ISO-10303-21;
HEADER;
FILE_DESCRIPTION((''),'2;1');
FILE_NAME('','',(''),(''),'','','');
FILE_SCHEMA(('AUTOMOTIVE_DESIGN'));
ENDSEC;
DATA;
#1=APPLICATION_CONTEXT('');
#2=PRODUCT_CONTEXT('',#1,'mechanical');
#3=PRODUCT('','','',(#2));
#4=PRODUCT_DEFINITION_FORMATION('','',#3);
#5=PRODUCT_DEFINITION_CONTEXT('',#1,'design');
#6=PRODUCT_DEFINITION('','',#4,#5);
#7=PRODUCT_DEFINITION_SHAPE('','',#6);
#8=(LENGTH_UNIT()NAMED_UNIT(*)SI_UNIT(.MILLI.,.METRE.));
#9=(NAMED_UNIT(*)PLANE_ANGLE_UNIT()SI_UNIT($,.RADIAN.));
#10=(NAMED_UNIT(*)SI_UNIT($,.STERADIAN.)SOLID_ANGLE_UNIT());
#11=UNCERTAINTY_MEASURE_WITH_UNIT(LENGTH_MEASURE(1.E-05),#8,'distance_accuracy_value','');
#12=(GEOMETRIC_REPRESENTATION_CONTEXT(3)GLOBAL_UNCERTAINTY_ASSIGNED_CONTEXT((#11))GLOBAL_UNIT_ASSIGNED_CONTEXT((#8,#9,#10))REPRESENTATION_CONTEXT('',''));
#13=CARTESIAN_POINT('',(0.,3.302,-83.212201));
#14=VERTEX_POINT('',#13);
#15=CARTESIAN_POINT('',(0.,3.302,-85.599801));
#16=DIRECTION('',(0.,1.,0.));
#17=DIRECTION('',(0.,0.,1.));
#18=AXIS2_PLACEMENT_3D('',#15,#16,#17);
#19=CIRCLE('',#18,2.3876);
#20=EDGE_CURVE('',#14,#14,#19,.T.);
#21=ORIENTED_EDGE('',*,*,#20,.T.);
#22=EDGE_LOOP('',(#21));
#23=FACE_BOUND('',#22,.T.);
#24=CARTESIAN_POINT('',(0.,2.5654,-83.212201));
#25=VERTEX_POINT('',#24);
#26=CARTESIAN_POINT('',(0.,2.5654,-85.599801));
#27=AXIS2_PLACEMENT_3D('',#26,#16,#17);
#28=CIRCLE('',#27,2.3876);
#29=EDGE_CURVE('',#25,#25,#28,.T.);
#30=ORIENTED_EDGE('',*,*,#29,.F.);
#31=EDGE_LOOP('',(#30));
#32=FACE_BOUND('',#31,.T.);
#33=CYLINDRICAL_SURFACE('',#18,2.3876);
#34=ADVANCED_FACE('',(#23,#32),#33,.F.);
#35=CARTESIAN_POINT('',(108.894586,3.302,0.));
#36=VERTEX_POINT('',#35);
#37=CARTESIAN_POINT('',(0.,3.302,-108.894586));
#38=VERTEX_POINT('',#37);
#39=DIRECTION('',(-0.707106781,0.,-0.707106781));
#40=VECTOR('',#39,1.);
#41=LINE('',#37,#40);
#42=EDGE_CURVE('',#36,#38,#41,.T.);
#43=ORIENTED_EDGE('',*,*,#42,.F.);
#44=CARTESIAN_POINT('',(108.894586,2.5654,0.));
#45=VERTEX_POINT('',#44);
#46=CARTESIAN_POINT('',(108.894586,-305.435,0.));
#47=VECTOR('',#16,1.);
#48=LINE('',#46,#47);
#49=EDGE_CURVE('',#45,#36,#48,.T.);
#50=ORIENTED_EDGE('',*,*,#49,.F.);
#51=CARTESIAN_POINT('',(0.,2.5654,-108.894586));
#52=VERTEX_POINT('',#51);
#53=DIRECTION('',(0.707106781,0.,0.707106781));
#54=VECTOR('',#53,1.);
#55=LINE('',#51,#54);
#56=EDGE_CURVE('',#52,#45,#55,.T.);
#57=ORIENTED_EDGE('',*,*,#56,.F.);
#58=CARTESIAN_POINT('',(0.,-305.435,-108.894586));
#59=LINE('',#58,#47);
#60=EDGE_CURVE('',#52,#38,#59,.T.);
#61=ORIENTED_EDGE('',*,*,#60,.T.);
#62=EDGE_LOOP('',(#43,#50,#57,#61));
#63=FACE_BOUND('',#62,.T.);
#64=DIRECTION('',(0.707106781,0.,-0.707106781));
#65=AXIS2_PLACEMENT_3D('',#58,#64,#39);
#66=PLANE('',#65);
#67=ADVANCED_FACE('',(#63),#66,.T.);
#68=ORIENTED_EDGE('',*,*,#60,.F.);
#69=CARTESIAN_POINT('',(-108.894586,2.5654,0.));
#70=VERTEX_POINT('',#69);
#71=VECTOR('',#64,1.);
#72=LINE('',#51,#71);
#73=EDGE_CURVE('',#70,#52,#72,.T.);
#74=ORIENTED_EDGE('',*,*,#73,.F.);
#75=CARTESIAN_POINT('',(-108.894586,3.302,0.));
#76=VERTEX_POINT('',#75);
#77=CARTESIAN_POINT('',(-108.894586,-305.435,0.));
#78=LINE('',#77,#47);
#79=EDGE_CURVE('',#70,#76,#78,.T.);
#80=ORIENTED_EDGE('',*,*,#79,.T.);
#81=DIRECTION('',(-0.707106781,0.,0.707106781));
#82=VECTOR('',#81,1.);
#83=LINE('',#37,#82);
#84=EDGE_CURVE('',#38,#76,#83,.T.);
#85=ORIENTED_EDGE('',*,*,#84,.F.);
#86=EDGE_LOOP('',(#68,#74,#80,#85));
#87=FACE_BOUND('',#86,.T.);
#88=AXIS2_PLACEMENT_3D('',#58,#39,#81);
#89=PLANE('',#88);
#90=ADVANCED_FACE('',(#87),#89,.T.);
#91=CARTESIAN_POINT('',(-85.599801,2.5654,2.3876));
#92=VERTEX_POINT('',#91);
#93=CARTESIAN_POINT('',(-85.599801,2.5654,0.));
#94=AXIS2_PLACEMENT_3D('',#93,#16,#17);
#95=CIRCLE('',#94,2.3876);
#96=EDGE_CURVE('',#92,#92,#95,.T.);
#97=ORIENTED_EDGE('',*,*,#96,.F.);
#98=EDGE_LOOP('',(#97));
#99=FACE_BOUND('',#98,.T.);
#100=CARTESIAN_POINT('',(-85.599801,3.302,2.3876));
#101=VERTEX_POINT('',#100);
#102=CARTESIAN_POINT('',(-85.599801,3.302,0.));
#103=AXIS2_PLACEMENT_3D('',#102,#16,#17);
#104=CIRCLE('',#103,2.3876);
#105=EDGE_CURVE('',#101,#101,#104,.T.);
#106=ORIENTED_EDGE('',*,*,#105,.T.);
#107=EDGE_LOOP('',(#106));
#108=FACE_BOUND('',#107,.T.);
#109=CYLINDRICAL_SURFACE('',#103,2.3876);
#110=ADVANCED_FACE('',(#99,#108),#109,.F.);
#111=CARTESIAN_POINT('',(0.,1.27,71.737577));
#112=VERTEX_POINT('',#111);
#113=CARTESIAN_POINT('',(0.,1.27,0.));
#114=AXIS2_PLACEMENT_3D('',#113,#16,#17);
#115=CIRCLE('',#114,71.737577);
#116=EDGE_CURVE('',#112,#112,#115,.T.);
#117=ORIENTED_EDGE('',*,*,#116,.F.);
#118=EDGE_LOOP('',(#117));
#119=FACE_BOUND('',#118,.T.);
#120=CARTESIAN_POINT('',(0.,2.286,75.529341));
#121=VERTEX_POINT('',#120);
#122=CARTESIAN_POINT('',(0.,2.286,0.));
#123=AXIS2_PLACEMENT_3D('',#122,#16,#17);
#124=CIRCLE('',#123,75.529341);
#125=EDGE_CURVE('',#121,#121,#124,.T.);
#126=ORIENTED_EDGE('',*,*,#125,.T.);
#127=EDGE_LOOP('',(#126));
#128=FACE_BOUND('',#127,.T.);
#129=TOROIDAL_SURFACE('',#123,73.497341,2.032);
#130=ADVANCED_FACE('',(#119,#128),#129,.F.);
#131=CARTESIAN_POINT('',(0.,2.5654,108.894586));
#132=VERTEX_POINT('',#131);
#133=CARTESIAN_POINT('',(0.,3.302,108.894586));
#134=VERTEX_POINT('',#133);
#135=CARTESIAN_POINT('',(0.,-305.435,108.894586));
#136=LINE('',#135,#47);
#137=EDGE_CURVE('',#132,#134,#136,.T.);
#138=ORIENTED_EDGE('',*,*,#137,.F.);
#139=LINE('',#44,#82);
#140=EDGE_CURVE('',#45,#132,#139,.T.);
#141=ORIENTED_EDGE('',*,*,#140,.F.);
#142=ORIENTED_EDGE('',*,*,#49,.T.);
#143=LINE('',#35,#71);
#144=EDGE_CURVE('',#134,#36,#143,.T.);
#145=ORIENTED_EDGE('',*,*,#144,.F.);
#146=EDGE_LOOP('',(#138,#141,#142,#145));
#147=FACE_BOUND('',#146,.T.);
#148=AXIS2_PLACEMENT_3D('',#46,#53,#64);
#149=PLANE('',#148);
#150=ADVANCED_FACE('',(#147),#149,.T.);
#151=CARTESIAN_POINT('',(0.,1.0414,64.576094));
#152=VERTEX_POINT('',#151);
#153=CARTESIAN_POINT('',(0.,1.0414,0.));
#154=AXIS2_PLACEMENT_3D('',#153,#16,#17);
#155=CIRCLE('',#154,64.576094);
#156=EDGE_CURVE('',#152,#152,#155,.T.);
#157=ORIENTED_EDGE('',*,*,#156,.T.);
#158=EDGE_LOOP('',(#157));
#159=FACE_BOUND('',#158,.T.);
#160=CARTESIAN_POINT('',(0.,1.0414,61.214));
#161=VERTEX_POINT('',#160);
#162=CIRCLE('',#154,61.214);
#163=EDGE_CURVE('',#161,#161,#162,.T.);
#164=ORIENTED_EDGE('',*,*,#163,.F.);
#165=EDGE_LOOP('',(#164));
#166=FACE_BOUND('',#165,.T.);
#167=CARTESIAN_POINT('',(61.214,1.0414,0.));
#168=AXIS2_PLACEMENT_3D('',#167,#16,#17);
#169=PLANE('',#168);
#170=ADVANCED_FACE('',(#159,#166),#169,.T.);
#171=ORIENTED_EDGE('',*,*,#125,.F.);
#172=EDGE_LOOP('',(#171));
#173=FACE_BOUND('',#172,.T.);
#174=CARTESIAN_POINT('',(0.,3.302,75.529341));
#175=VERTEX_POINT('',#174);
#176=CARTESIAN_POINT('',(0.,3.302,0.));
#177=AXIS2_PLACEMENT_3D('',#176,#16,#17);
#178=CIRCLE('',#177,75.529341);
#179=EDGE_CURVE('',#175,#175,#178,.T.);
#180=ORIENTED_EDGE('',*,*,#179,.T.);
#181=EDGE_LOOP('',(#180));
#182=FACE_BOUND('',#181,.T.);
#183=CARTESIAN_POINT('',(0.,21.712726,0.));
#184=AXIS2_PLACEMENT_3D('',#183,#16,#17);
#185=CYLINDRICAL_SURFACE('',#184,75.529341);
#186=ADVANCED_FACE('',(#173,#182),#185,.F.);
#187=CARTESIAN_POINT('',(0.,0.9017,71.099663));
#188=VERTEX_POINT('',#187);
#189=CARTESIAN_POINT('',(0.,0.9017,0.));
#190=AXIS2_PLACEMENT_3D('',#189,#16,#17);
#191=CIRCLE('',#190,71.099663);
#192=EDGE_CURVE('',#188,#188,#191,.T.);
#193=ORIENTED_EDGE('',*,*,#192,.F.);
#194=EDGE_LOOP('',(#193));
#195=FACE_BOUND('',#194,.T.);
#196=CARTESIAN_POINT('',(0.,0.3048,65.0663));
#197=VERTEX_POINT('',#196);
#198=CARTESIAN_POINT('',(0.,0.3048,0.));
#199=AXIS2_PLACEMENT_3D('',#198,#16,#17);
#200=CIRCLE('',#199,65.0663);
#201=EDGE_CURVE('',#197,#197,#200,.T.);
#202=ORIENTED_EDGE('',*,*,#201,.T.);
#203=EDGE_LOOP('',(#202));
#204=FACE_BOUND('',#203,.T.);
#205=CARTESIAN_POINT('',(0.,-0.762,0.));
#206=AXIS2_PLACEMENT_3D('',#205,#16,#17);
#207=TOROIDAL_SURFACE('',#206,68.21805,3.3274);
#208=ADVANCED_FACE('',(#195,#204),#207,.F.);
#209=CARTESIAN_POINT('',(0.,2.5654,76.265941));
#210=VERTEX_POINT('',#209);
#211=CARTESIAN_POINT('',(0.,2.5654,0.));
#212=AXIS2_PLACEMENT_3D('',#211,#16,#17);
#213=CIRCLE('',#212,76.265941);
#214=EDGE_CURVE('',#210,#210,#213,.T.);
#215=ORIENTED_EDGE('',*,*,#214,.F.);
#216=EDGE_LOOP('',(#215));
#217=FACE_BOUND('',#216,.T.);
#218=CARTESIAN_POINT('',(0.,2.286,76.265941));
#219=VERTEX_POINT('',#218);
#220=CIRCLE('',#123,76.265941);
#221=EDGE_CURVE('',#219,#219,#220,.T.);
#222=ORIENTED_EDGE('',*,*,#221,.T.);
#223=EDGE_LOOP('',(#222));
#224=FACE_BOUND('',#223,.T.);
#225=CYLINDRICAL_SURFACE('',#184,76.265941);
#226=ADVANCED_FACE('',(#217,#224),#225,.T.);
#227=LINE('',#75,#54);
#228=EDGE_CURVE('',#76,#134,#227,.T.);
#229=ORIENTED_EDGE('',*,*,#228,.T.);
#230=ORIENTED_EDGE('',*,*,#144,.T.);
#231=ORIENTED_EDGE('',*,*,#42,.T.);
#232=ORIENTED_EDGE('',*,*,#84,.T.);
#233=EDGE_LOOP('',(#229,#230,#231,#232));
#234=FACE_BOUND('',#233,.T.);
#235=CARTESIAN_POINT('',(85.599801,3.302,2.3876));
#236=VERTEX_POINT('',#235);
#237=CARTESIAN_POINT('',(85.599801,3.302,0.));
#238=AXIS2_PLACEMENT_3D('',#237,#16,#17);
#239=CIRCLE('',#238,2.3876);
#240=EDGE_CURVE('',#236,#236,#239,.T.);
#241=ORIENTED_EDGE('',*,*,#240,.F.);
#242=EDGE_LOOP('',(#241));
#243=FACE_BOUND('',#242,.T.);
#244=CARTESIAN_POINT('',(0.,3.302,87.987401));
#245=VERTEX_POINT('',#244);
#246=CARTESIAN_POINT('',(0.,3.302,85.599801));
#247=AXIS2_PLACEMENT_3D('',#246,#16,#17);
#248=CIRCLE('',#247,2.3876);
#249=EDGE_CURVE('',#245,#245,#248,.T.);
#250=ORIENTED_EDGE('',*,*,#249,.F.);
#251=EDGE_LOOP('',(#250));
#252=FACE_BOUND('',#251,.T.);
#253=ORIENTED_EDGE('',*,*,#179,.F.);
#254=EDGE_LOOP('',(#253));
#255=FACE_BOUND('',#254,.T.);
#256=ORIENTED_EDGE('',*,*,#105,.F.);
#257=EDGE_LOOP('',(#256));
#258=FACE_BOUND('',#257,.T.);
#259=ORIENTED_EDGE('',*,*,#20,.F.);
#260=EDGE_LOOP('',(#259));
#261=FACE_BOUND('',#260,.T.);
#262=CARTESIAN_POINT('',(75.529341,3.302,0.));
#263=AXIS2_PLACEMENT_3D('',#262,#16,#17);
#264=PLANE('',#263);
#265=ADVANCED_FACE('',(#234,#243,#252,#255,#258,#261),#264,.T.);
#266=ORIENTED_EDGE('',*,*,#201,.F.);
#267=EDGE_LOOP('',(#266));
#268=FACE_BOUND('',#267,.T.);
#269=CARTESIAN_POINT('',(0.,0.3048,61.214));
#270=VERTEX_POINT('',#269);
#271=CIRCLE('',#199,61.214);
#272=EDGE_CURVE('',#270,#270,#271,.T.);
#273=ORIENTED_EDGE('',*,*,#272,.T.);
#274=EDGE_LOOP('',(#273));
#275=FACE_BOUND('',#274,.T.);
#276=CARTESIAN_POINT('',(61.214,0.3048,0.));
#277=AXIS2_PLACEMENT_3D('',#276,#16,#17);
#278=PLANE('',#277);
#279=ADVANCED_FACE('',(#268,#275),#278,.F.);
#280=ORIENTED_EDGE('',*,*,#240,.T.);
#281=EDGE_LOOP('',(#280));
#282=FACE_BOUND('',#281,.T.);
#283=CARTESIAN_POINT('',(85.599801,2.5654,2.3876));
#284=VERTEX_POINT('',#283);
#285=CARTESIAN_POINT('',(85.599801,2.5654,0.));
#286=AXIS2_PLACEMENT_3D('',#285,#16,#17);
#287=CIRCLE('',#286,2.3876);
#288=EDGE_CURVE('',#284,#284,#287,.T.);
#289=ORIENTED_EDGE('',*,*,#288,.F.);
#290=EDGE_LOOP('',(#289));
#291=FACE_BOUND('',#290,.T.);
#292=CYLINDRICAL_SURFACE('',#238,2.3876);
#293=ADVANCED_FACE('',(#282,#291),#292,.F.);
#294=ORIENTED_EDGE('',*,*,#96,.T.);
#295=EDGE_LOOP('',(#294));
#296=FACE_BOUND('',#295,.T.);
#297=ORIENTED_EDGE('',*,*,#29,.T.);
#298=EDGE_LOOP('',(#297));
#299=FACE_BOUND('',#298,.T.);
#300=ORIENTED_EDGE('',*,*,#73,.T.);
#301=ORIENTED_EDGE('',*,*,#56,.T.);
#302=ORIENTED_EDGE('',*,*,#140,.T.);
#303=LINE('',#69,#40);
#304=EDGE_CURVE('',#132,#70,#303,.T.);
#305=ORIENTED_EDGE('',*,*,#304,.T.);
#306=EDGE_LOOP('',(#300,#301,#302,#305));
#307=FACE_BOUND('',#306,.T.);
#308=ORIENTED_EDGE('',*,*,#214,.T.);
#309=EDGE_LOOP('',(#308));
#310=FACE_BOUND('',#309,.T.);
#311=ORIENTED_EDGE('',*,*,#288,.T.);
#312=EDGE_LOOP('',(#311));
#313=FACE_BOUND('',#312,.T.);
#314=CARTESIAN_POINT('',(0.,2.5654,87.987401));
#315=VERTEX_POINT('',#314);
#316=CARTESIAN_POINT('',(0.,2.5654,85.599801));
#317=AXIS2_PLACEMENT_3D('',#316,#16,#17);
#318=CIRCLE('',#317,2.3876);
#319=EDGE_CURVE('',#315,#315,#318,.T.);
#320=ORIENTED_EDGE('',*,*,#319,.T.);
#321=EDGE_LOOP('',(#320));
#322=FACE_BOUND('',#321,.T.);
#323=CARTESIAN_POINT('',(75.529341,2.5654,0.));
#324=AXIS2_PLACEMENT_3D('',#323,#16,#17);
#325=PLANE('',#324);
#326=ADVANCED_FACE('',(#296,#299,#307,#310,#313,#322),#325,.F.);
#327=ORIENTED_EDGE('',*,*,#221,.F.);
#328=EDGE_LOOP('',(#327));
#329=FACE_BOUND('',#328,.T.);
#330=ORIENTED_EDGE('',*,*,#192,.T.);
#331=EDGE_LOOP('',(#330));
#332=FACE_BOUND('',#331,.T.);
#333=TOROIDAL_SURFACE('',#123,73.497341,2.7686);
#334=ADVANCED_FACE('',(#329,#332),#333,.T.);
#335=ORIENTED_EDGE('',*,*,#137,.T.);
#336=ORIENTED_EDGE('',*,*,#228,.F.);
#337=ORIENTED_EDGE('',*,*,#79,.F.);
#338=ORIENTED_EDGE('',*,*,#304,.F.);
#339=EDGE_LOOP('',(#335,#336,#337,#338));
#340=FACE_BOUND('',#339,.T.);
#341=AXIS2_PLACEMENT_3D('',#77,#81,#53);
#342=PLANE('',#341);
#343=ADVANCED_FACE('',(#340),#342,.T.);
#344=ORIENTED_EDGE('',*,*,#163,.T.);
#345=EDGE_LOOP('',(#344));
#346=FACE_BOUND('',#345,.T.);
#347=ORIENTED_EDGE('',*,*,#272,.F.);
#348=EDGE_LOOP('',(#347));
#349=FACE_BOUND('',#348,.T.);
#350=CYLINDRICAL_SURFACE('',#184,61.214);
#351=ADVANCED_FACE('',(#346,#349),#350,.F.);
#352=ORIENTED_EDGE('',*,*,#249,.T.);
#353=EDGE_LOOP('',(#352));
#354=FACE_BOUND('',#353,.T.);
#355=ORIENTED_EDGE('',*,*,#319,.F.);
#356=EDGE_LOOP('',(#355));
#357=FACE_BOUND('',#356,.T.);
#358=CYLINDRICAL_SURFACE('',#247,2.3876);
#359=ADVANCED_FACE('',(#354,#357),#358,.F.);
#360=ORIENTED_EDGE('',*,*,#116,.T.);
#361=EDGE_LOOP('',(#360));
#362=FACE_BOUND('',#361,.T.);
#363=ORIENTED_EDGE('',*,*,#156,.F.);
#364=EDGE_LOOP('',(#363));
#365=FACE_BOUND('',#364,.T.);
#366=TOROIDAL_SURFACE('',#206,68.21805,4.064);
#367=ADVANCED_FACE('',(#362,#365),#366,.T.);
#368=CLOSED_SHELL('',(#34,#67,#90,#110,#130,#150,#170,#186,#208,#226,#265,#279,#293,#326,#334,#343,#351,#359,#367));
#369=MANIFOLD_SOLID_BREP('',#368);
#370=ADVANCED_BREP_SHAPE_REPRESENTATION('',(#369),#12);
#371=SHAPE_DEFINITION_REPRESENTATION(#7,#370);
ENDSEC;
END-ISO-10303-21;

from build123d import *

# Parameters (mm, degrees)
SKETCH2_W                                 = 154.0002
SKETCH2_H                                 = 154.0002
SKETCH2_R                                 = 75.529340861
EXTRUDE1_DEPTH                            = 0.7366
EXTRUDE2_START                            = -0.7366
SKETCH3_R                                 = 75.529340861
EXTRUDE2_DEPTH                            = 0.7366
CIRPATTERN1_COUNT                         = 6
SKETCH5_W                                 = 3.3782
SKETCH5_H                                 = 0.7366
F_5_32_0_156250_DIAMETER_HOLE1_AT_2_COUNT = 2
F_5_32_0_156250_DIAMETER_HOLE1_AT_2_PITCH = 141.3002
F_5_32_0_156250_DIAMETER_HOLE1_AT_3_COUNT = 2
F_5_32_0_156250_DIAMETER_HOLE1_AT_3_PITCH = 141.3002
F_5_32_0_156250_DIAMETER_HOLE1_AT_4_COUNT = 2
F_5_32_0_156250_DIAMETER_HOLE1_AT_4_PITCH = 199.828659206
SKETCH7_W                                 = 2.3876
SKETCH7_H                                 = 8.128
F_5_32_0_156250_DIAMETER_HOLE2_AT_2_COUNT = 2
F_5_32_0_156250_DIAMETER_HOLE2_AT_2_PITCH = 121.0564
F_5_32_0_156250_DIAMETER_HOLE2_AT_3_COUNT = 2
F_5_32_0_156250_DIAMETER_HOLE2_AT_3_PITCH = 171.199602692
F_5_32_0_156250_DIAMETER_HOLE2_AT_4_COUNT = 2
F_5_32_0_156250_DIAMETER_HOLE2_AT_4_PITCH = 121.0564
CIRPATTERN2_COUNT                         = 4


# Read off the part's stored shape, not the designer's step: Revolve-Thin5
with BuildPart() as part:
    # Sketch1 → Revolve-Thin4 (revolve)
    with BuildSketch(Plane.XY, mode=Mode.PRIVATE) as revolve_thin4_sk:
        with BuildLine():
            Line((62.74854946, 1.778), (61.214, 1.778))
            ThreePointArc((61.214, 1.778), (59.436, 0), (61.214, -1.778))
            Line((61.214, -1.778), (64.28309892, -1.778))
            ThreePointArc((64.28309892, -1.778), (67.669225582, -4.788771381), (71.737577241, -2.794))
            ThreePointArc((71.737577241, -2.794), (74.023261161, -1.847238721), (75.529340861, -3.81))
            Line((75.529340861, -3.81), (75.529340861, -4.826))
            Line((75.529340861, -4.826), (77.0001, -4.826))
            Line((77.0001, -4.826), (77.0001, -4.0894))
            Line((77.0001, -4.0894), (76.265940861, -4.0894))
            Line((76.265940861, -4.0894), (76.265940861, -3.81))
            ThreePointArc((76.265940861, -3.81), (74.21390727, -1.135737757), (71.099662929, -2.4257))
            ThreePointArc((71.099662929, -2.4257), (67.492675346, -4.00937161), (64.902401285, -1.0414))
            Line((64.902401285, -1.0414), (61.214, -1.0414))
            ThreePointArc((61.214, -1.0414), (60.1726, 0), (61.214, 1.0414))
            Line((61.214, 1.0414), (62.74854946, 1.0414))
            Line((62.74854946, 1.0414), (62.74854946, 1.778))
        make_face()
    revolve(revolve_thin4_sk.sketch.rotate(Axis((0, 21.71272626, 0), (0, -1, 0)), 90), axis=Axis((0, 21.71272626, 0), (0, -1, 0)))

    # Sketch2 → Extrude1 (add)
    with BuildSketch(Plane.XZ.offset(4.826)):
        Rectangle(SKETCH2_W, SKETCH2_H)
        with Locations(Location((0, 0, 0), (0, 0, 90))):
            Circle(SKETCH2_R, mode=Mode.SUBTRACT)
    extrude(amount=-EXTRUDE1_DEPTH)

    # Sketch5 → 5/32 (0.156250) Diameter Hole1 (revolve, cut)
    with BuildSketch(Plane(origin=(70.6501, -4.0894, -70.6501), x_dir=(0, 0, 1), z_dir=(1, 0, 0))):
        with Locations((1.6891, 0.3683)):
            Rectangle(SKETCH5_W, SKETCH5_H)
    f_5_32_0_156250_diameter_hole1 = revolve(axis=Axis((70.6501, 2.2606, -70.6501), (0, -1, 0)), mode=Mode.SUBTRACT)

    # 5/32 (0.156250) Diameter Hole1 at 2: 5/32 (0.156250) Diameter Hole1 ×2
    with Locations(*[(0, 0, i * F_5_32_0_156250_DIAMETER_HOLE1_AT_2_PITCH) for i in range(1, F_5_32_0_156250_DIAMETER_HOLE1_AT_2_COUNT)]):
        add(f_5_32_0_156250_diameter_hole1, mode=Mode.SUBTRACT)

    # 5/32 (0.156250) Diameter Hole1 at 3: 5/32 (0.156250) Diameter Hole1 ×2
    with Locations(*[(-i * F_5_32_0_156250_DIAMETER_HOLE1_AT_3_PITCH, 0, 0) for i in range(1, F_5_32_0_156250_DIAMETER_HOLE1_AT_3_COUNT)]):
        add(f_5_32_0_156250_diameter_hole1, mode=Mode.SUBTRACT)

    # 5/32 (0.156250) Diameter Hole1 at 4: 5/32 (0.156250) Diameter Hole1 ×2
    with Locations(*[Vector(-0.7071067811865476, 0, 0.7071067811865476) * (i * F_5_32_0_156250_DIAMETER_HOLE1_AT_4_PITCH) for i in range(1, F_5_32_0_156250_DIAMETER_HOLE1_AT_4_COUNT)]):
        add(f_5_32_0_156250_diameter_hole1, mode=Mode.SUBTRACT)

    # Sketch11 → 3/32 (0.093750) Diameter Hole2 (revolve, cut)
    with BuildSketch(Plane(origin=(-70.2437, -4.0894, -61.1251), x_dir=(0, 0, 1), z_dir=(1, 0, 0))):
        Polygon((0, 0), (0, 26.115399675), (1.190625, 25.4), (1.190625, 0), align=None)
    f_3_32_0_093750_diameter_hole2 = revolve(axis=Axis((-70.2437, 2.2606, -61.1251), (0, -1, 0)), mode=Mode.SUBTRACT)

    # CirPattern2: 3/32 (0.093750) Diameter Hole2 ×4 about axis
    cirpattern2_axis = Axis((0, 0, 0), (0, 1, 0))
    for i in range(1, CIRPATTERN2_COUNT):
        add(f_3_32_0_093750_diameter_hole2.rotate(cirpattern2_axis, i * 360 / CIRPATTERN2_COUNT), mode=Mode.SUBTRACT)


with BuildPart() as body_2:
    # Revolve-Thin5 outline → Revolve-Thin5 (revolve)
    with BuildSketch(Plane.XY):
        with BuildLine():
            Line((77.0001, 3.302), (75.529340861, 3.302))
            Line((75.529340861, 3.302), (75.529340861, 2.286))
            ThreePointArc((75.529340861, 2.286), (74.023261161, 0.323238721), (71.737577241, 1.27))
            ThreePointArc((71.737577241, 1.27), (68.088390068, 3.299931105), (64.576093872, 1.0414))
            Line((64.576093872, 1.0414), (61.214, 1.0414))
            Line((61.214, 1.0414), (61.214, 0.3048))
            Line((61.214, 0.3048), (65.066299927, 0.3048))
            ThreePointArc((65.066299927, 0.3048), (67.890458911, 2.54923464), (71.099662929, 0.9017))
            ThreePointArc((71.099662929, 0.9017), (74.21390727, -0.388262243), (76.265940861, 2.286))
            Line((76.265940861, 2.286), (76.265940861, 2.5654))
            Line((76.265940861, 2.5654), (77.0001, 2.5654))
            Line((77.0001, 2.5654), (77.0001, 3.302))
        make_face()
    revolve(axis=Axis((0, 0, 0), (0, 1, 0)))

    # Sketch3 → Extrude2 (add)
    with BuildSketch(Plane(origin=(0, 3.302, 0), x_dir=(-1, 0, 0), z_dir=(0, 1, 0)).offset(EXTRUDE2_START)):
        Polygon((0, -108.894585724), (108.894585724, 0), (0, 108.894585724), (-108.894585724, 0), align=None)
        with Locations(Location((0, 0, 0), (0, 0, 90))):
            Circle(SKETCH3_R, mode=Mode.SUBTRACT)
    extrude(amount=EXTRUDE2_DEPTH)

    # Sketch7 → 5/32 (0.156250) Diameter Hole2 (revolve, cut)
    with BuildSketch(Plane(origin=(85.599801346, 3.302, 0), x_dir=(0, 0, 1), z_dir=(1, 0, 0))):
        with Locations((1.1938, 4.064)):
            Rectangle(SKETCH7_W, SKETCH7_H)
    f_5_32_0_156250_diameter_hole2 = revolve(axis=Axis((85.599801346, 9.652, 0), (0, -1, 0)), mode=Mode.SUBTRACT)

    # 5/32 (0.156250) Diameter Hole2 at 2: 5/32 (0.156250) Diameter Hole2 ×2
    with Locations(*[Vector(-0.7071067811865476, 0, -0.7071067811865476) * (i * F_5_32_0_156250_DIAMETER_HOLE2_AT_2_PITCH) for i in range(1, F_5_32_0_156250_DIAMETER_HOLE2_AT_2_COUNT)]):
        add(f_5_32_0_156250_diameter_hole2, mode=Mode.SUBTRACT)

    # 5/32 (0.156250) Diameter Hole2 at 3: 5/32 (0.156250) Diameter Hole2 ×2
    with Locations(*[(-i * F_5_32_0_156250_DIAMETER_HOLE2_AT_3_PITCH, 0, 0) for i in range(1, F_5_32_0_156250_DIAMETER_HOLE2_AT_3_COUNT)]):
        add(f_5_32_0_156250_diameter_hole2, mode=Mode.SUBTRACT)

    # 5/32 (0.156250) Diameter Hole2 at 4: 5/32 (0.156250) Diameter Hole2 ×2
    with Locations(*[Vector(-0.7071067811865476, 0, 0.7071067811865476) * (i * F_5_32_0_156250_DIAMETER_HOLE2_AT_4_PITCH) for i in range(1, F_5_32_0_156250_DIAMETER_HOLE2_AT_4_COUNT)]):
        add(f_5_32_0_156250_diameter_hole2, mode=Mode.SUBTRACT)


with BuildPart() as body_3:
    # Sketch4 → Revolve1 (revolve)
    with BuildSketch(Plane.XY):
        with BuildLine():
            Line((68.21805, 2.5146), (68.21805, -4.0386))
            ThreePointArc((68.21805, -4.0386), (71.49465, -0.762), (68.21805, 2.5146))
        make_face()
    revolve(axis=Axis((68.21805, 2.837450101, 0), (0, -1, 0)))


with BuildPart() as cirpattern1_1:
    # CirPattern1: pattern copy
    add(body_3.part.rotate(Axis((0, 0, 0), (0, 1, 0)), 1 * 360 / CIRPATTERN1_COUNT))


with BuildPart() as cirpattern1_2:
    # CirPattern1: pattern copy
    add(body_3.part.rotate(Axis((0, 0, 0), (0, 1, 0)), 2 * 360 / CIRPATTERN1_COUNT))


with BuildPart() as cirpattern1_3:
    # CirPattern1: pattern copy
    add(body_3.part.rotate(Axis((0, 0, 0), (0, 1, 0)), 3 * 360 / CIRPATTERN1_COUNT))


with BuildPart() as cirpattern1_4:
    # CirPattern1: pattern copy
    add(body_3.part.rotate(Axis((0, 0, 0), (0, 1, 0)), 4 * 360 / CIRPATTERN1_COUNT))


with BuildPart() as cirpattern1_5:
    # CirPattern1: pattern copy
    add(body_3.part.rotate(Axis((0, 0, 0), (0, 1, 0)), 5 * 360 / CIRPATTERN1_COUNT))


solid = body_2.part
